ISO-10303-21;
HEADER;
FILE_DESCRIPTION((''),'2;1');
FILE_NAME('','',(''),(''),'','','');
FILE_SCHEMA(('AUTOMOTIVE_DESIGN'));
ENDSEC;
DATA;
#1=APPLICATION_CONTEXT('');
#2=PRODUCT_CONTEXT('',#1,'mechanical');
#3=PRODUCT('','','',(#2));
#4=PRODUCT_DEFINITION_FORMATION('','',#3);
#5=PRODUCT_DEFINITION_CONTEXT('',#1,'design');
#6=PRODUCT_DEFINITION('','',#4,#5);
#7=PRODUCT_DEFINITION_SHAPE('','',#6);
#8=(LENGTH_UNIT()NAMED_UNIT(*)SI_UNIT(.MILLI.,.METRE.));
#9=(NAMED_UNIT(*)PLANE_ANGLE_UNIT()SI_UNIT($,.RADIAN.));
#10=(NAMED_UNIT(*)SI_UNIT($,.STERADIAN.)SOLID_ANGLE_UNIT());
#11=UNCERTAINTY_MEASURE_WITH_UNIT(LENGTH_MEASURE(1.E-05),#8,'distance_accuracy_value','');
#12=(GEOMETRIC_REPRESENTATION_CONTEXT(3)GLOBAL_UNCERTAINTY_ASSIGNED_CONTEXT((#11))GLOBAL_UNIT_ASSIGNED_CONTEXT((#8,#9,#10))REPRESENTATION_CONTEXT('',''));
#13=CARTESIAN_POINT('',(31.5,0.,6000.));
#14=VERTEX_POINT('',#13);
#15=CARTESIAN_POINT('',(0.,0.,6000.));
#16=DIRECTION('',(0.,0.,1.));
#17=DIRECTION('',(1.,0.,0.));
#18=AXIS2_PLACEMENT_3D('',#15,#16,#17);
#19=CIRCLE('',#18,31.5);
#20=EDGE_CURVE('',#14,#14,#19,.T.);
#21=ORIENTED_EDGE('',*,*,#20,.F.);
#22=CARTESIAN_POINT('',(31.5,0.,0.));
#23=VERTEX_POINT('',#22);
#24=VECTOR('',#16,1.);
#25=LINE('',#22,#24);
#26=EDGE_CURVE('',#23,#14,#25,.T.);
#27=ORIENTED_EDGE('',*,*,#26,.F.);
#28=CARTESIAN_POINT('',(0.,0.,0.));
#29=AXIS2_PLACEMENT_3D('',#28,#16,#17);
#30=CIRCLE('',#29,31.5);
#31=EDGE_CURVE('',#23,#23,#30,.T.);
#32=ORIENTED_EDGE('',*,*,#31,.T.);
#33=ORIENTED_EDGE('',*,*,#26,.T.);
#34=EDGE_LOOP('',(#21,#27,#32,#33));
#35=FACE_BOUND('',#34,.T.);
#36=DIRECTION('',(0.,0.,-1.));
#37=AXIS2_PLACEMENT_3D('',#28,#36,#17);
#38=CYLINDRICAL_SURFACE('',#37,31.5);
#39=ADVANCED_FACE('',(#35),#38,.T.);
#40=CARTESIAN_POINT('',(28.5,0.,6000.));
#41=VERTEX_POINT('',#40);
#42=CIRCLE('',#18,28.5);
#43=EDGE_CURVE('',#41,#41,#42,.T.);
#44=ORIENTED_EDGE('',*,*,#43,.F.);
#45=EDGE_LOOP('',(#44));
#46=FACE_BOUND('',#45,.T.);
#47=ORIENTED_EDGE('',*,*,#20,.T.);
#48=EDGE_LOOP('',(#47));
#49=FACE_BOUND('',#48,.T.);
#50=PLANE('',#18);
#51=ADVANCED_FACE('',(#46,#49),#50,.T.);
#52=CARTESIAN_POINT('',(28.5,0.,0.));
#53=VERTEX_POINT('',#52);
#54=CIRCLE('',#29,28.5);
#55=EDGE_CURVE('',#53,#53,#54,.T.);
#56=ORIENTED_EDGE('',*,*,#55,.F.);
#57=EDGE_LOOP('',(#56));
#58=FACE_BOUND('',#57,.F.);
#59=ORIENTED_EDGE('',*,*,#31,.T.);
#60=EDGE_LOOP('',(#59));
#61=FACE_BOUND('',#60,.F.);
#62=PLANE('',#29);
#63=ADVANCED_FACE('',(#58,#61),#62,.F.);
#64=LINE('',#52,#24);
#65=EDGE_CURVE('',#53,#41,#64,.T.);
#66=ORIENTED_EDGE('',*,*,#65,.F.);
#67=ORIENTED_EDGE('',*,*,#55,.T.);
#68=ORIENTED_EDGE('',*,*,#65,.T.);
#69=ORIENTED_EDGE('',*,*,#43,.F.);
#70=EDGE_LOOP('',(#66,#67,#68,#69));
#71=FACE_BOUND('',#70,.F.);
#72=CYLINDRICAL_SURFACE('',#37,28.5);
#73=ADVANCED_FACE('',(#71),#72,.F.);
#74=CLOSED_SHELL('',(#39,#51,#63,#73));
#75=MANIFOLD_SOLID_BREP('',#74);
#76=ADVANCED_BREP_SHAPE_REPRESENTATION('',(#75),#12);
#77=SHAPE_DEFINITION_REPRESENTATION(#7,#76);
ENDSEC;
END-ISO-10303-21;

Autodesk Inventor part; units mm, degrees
ref_plane "YZ Plane" through (0, 0, 0) normal (1, 0, 0) x (0, 1, 0)
ref_plane "XZ Plane" through (0, 0, 0) normal (0, 1, 0) x (-1, 0, 0)
ref_plane "XY Plane" through (0, 0, 0) normal (0, 0, 1) x (1, 0, 0)
sketch "Sketch1" plane through (0, 0, 0) normal (0, 0, 1) x (1, 0, 0)
  circle A0 centre (0, 0) radius 31.5
  circle A1 centre (0, 0) radius 28.5
  dimension "d0" = 63
  dimension "d1" = 3
extrude "Extrusion1" add sketch "Sketch1" along normal blind 6000
properties part number "pvcSection" material "PVC-Piping"
